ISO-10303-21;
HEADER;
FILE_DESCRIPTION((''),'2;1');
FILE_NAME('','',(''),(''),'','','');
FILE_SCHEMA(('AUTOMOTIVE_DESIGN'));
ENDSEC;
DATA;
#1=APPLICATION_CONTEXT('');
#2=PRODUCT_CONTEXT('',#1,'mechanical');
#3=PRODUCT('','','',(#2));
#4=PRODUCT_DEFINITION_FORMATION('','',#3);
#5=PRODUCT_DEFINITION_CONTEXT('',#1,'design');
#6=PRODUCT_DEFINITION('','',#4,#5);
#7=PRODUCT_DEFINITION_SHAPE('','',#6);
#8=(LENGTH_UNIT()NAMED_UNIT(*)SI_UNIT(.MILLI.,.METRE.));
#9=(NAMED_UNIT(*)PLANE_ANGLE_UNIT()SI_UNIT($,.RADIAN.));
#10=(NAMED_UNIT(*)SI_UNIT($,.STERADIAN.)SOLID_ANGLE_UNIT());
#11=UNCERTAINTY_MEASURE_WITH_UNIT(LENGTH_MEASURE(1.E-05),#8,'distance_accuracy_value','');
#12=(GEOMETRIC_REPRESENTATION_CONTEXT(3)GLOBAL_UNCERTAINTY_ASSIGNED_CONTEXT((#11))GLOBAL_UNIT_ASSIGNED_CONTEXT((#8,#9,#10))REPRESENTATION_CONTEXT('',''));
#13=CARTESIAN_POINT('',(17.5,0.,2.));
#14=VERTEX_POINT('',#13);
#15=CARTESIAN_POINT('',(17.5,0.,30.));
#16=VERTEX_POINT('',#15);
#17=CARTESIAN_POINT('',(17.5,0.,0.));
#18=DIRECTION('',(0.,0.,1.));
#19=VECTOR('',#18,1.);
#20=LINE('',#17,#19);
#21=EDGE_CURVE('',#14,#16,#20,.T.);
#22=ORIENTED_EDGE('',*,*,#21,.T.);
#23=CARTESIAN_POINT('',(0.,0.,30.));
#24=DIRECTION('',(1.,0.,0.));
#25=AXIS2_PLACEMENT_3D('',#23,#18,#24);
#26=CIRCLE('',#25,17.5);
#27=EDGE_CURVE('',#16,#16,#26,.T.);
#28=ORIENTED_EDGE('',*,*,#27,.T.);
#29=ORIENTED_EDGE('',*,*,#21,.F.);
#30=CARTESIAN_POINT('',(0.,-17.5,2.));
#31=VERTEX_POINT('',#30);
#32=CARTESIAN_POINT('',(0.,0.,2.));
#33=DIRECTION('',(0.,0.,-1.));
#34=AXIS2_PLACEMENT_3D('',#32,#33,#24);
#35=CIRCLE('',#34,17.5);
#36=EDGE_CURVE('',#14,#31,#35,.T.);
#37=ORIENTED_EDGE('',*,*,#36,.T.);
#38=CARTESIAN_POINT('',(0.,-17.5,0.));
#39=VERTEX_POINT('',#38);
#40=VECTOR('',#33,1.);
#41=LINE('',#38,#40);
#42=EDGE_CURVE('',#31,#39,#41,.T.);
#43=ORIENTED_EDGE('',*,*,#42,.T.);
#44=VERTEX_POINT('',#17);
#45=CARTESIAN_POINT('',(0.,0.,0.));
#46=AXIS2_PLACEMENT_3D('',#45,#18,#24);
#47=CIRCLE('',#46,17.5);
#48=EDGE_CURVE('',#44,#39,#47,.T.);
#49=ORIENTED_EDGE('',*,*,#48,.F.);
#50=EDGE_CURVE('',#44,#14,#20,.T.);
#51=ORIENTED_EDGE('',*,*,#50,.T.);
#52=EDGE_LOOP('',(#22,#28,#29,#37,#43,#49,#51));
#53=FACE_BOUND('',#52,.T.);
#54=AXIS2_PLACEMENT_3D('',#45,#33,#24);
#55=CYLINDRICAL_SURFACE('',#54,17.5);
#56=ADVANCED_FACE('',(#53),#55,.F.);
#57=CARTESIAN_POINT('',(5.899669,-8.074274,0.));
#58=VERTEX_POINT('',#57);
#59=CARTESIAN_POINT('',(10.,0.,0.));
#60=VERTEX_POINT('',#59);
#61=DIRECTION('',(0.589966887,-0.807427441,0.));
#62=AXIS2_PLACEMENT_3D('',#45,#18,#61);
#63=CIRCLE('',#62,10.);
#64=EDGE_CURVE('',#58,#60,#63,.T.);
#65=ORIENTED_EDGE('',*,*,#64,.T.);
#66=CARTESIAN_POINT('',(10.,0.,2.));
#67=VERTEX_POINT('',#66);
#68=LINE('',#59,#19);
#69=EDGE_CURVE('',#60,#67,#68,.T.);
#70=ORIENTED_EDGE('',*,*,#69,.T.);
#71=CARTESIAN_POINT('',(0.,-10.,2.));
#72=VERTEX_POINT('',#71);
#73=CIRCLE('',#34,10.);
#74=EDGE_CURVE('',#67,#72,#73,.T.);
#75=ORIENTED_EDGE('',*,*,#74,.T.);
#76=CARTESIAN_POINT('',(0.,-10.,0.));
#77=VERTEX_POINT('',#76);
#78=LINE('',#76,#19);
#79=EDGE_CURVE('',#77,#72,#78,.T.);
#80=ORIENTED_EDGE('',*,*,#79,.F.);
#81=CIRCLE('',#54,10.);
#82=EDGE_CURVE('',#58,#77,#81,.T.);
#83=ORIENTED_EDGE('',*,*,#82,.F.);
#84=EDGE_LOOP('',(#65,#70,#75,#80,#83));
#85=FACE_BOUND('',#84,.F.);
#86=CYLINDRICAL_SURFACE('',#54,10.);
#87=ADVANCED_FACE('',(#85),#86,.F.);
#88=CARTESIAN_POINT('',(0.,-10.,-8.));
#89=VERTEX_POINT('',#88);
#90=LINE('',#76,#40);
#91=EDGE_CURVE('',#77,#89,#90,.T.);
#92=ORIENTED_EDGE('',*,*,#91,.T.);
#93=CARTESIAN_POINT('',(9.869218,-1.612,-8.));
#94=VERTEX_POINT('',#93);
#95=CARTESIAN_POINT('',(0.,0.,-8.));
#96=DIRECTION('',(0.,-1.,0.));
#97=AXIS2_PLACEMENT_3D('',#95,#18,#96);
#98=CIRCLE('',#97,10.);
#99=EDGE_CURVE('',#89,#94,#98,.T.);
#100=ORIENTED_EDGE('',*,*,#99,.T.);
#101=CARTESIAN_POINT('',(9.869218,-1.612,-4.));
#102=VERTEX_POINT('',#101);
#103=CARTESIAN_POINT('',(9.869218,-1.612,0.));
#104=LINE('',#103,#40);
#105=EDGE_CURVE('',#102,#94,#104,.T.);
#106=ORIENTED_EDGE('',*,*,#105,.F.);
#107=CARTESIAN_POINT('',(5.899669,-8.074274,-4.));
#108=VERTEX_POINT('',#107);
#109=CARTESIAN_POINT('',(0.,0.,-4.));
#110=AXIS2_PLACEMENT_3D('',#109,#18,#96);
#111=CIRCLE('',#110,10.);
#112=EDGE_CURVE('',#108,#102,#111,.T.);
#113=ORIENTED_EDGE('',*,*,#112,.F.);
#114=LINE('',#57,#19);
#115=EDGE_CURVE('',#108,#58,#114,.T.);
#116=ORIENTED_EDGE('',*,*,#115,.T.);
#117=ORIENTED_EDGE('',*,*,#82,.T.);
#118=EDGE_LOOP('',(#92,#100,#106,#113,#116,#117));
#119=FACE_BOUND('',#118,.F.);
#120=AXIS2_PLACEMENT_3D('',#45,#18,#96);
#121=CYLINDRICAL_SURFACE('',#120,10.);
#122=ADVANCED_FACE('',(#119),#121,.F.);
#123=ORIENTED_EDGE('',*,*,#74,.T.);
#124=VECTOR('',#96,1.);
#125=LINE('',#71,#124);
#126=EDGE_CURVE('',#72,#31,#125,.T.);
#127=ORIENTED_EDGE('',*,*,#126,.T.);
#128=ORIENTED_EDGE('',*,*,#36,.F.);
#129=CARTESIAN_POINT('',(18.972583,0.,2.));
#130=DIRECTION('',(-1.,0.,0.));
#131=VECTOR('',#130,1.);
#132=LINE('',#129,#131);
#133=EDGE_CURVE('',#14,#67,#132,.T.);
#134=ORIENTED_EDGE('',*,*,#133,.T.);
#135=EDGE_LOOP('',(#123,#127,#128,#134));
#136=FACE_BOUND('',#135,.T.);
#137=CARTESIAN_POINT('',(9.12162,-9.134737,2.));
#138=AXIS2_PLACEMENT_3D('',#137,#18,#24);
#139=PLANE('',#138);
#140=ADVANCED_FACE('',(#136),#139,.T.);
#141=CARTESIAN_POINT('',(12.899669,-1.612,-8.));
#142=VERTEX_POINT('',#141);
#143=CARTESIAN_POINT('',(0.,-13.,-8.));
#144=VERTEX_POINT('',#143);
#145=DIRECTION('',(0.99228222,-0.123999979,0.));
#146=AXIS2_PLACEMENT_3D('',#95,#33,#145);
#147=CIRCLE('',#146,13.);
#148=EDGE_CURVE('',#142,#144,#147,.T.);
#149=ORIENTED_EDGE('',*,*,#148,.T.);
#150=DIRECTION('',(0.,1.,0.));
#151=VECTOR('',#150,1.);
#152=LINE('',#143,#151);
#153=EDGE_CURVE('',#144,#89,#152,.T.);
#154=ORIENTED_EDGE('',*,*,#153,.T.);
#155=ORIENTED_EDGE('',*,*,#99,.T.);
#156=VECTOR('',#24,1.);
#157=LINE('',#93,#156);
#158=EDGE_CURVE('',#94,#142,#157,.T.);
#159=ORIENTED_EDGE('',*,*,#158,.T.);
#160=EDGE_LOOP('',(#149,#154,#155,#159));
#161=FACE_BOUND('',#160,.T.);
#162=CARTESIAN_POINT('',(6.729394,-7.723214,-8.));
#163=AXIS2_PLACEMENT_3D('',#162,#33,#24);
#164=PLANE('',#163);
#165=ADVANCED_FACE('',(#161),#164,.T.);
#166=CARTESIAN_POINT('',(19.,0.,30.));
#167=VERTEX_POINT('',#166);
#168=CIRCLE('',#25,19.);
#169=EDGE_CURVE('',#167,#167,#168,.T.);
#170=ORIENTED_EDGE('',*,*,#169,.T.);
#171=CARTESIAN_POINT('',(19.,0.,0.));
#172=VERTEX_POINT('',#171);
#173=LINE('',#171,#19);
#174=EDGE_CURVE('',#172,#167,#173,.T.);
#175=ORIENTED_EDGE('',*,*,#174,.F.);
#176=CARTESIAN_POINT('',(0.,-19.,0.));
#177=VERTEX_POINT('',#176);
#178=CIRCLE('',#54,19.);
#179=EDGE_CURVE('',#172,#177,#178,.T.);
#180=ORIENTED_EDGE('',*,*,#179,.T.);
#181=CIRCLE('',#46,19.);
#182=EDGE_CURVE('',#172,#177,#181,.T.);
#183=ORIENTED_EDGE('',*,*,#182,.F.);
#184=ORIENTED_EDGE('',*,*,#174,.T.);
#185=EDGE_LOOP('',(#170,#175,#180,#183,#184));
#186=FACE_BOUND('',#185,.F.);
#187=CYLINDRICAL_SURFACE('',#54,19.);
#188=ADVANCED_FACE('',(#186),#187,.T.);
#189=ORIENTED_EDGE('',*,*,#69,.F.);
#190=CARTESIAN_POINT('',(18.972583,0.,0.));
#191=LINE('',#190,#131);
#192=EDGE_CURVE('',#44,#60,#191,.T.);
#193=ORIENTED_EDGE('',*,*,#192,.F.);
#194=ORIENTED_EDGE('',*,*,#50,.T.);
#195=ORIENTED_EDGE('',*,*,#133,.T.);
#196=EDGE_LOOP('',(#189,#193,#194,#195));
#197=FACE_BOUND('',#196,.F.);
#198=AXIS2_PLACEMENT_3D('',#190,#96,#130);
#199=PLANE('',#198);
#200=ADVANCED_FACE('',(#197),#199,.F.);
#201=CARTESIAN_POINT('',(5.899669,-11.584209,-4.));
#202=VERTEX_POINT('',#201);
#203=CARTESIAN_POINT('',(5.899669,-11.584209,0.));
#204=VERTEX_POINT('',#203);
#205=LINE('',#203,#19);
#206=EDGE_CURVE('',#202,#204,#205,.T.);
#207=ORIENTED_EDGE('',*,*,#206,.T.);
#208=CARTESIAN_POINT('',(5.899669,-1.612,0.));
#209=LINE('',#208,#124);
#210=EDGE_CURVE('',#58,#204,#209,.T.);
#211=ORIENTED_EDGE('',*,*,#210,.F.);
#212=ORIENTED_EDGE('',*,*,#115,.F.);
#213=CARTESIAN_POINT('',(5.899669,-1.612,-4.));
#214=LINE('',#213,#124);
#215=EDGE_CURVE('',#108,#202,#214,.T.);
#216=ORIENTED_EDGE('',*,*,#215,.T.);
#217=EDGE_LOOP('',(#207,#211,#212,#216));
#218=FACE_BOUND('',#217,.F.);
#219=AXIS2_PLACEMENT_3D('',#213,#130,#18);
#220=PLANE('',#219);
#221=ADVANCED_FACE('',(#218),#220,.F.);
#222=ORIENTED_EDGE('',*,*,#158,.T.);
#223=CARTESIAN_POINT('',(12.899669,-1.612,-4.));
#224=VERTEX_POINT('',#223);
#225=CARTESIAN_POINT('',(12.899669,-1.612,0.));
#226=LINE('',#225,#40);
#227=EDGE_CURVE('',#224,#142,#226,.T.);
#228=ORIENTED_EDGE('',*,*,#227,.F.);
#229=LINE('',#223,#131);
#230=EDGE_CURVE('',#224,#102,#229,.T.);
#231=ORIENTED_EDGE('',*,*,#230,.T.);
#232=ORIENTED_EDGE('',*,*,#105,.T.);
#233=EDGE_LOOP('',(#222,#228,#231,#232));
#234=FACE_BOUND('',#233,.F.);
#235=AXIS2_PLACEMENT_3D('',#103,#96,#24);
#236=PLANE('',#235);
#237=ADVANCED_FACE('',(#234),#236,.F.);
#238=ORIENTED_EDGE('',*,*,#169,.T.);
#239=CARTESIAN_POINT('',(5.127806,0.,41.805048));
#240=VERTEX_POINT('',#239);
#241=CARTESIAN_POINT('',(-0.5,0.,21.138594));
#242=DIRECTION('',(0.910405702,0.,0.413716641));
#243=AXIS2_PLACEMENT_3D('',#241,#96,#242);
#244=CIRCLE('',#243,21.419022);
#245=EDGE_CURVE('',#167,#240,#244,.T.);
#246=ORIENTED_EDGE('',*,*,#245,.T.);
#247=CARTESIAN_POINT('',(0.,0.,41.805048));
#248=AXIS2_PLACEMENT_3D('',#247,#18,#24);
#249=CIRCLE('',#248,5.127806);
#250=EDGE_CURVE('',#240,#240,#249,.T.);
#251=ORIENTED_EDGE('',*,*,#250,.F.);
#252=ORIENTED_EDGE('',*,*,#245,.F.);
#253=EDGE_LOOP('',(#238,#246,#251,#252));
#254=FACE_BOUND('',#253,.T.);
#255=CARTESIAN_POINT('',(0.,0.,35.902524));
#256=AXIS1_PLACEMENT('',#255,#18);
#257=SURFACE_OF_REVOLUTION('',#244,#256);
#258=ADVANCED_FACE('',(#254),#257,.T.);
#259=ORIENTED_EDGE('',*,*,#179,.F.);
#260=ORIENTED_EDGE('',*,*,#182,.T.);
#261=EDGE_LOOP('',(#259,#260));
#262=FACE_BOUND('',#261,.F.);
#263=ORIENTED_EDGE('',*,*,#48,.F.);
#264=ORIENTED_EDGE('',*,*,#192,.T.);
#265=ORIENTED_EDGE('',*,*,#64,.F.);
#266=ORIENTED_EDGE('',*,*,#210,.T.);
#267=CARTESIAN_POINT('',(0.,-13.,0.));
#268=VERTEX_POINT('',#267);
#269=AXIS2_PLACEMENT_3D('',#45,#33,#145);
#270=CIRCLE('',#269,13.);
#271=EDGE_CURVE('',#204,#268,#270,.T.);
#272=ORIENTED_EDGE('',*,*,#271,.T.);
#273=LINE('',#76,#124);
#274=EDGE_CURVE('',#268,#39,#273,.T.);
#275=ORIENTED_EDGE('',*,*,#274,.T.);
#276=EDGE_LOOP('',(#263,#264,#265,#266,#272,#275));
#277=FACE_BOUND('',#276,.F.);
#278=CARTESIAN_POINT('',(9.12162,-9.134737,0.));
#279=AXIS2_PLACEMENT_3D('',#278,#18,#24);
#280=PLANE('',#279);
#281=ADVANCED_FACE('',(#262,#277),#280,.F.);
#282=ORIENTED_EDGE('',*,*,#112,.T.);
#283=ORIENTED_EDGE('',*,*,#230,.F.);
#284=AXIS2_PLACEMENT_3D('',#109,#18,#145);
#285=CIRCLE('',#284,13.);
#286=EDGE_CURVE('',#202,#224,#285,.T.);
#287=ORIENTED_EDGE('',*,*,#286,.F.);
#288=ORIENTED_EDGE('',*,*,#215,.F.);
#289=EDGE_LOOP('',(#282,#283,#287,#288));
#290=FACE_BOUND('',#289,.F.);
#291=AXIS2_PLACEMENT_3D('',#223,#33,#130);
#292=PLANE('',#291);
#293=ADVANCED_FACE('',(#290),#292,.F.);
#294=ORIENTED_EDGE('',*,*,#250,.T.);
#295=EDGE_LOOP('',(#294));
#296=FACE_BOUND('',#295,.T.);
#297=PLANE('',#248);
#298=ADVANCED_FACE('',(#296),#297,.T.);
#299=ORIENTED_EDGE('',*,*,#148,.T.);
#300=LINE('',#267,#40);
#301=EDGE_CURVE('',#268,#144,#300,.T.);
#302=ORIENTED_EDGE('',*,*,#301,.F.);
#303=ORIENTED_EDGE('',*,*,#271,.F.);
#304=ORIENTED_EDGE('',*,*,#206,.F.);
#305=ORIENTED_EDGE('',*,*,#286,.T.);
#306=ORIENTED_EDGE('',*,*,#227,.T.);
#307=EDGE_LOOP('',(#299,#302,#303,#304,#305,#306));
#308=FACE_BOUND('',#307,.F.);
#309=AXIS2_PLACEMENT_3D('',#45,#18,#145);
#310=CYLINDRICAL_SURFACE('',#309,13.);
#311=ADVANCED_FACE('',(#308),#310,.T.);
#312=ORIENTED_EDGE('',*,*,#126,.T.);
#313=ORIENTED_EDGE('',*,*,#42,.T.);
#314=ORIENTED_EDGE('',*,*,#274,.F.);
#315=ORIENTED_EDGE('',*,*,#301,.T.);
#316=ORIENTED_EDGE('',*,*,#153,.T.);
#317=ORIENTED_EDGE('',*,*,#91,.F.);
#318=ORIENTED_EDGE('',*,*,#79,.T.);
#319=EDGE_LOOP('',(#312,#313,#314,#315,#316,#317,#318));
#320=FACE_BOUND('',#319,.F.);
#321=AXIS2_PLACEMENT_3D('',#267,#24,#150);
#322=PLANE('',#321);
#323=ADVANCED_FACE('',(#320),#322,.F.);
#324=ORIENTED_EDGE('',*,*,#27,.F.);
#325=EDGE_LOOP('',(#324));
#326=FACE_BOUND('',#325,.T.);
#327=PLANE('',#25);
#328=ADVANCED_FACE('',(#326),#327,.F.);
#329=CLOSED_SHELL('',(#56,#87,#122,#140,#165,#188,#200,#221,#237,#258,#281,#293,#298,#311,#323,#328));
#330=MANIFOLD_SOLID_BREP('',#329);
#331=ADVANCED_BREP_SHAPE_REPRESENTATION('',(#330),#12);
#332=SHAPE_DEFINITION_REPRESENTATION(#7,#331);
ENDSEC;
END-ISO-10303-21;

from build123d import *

# Parameters (mm, degrees)
F0_R     = 19
F0_R_2   = 17.5
F1_DEPTH = 30
F5_DEPTH = 2
F7_DEPTH = 8
F8_W     = 3.0304512245
F8_H     = 4
F8_W_2   = 3.9695487755
F9_DEPTH = 25


# Not quite as in the source:
# - a feature names something its author has since deleted; it is built from what else it names


with BuildPart() as f1:
    # F0 (on Top) → F1 (new body)
    with BuildSketch(Plane.XY):
        Circle(F0_R)
        Circle(F0_R_2, mode=Mode.SUBTRACT)
    extrude(amount=F1_DEPTH)

    # F2 (on Front) → F3 (revolve)
    with BuildSketch(Plane.XZ):
        with BuildLine():
            Line((0, 41.805047949), (0, 30))
            Line((0, 30), (19, 30))
            ThreePointArc((19, 30), (13.3813344534, 37.450646936), (5.1278058683, 41.805047949))
            Line((5.1278058683, 41.805047949), (0, 41.805047949))
        make_face()
    revolve(axis=Axis((0, 0, 35.9025239745), (0, 0, 1)))

    # F4 (on Top) → F5 (join)
    with BuildSketch(Plane.XY):
        with BuildLine():
            ThreePointArc((10, 0), (7.0710678119, -7.0710678119), (0, -10))
            Line((0, -10), (0, -19))
            ThreePointArc((0, -19), (13.4173031296, -13.4253390842), (18.972583327, 0))
            Line((18.972583327, 0), (10, 0))
        make_face()
    extrude(amount=F5_DEPTH)

    # F6 (on face) → F7 (join)
    with BuildSketch(Plane(origin=(0, 0, 0), x_dir=(1, 0, 0), z_dir=(0, 0, -1))):
        with BuildLine():
            Line((9.8692176419, 1.6119997323), (12.8996688664, 1.6119997323))
            ThreePointArc((12.8996688664, 1.6119997323), (8.6036039972, 9.745665614), (0, 13))
            Line((0, 13), (0, 10))
            ThreePointArc((0, 10), (6.4761100468, 7.6197111928), (9.8692176419, 1.6119997323))
        make_face()
    extrude(amount=F7_DEPTH)

    # F8 (on face) → F9 (cut)
    with BuildSketch(Plane(origin=(0, -1.6119997323, 0), x_dir=(-1, 0, 0), z_dir=(0, 1, 0))):
        with Locations((-11.3844432541, -2)):
            Rectangle(F8_W, F8_H)
        with Locations((-7.8844432541, -2)):
            Rectangle(F8_W_2, F8_H)
    extrude(amount=-F9_DEPTH, mode=Mode.SUBTRACT)


solid = f1.part
